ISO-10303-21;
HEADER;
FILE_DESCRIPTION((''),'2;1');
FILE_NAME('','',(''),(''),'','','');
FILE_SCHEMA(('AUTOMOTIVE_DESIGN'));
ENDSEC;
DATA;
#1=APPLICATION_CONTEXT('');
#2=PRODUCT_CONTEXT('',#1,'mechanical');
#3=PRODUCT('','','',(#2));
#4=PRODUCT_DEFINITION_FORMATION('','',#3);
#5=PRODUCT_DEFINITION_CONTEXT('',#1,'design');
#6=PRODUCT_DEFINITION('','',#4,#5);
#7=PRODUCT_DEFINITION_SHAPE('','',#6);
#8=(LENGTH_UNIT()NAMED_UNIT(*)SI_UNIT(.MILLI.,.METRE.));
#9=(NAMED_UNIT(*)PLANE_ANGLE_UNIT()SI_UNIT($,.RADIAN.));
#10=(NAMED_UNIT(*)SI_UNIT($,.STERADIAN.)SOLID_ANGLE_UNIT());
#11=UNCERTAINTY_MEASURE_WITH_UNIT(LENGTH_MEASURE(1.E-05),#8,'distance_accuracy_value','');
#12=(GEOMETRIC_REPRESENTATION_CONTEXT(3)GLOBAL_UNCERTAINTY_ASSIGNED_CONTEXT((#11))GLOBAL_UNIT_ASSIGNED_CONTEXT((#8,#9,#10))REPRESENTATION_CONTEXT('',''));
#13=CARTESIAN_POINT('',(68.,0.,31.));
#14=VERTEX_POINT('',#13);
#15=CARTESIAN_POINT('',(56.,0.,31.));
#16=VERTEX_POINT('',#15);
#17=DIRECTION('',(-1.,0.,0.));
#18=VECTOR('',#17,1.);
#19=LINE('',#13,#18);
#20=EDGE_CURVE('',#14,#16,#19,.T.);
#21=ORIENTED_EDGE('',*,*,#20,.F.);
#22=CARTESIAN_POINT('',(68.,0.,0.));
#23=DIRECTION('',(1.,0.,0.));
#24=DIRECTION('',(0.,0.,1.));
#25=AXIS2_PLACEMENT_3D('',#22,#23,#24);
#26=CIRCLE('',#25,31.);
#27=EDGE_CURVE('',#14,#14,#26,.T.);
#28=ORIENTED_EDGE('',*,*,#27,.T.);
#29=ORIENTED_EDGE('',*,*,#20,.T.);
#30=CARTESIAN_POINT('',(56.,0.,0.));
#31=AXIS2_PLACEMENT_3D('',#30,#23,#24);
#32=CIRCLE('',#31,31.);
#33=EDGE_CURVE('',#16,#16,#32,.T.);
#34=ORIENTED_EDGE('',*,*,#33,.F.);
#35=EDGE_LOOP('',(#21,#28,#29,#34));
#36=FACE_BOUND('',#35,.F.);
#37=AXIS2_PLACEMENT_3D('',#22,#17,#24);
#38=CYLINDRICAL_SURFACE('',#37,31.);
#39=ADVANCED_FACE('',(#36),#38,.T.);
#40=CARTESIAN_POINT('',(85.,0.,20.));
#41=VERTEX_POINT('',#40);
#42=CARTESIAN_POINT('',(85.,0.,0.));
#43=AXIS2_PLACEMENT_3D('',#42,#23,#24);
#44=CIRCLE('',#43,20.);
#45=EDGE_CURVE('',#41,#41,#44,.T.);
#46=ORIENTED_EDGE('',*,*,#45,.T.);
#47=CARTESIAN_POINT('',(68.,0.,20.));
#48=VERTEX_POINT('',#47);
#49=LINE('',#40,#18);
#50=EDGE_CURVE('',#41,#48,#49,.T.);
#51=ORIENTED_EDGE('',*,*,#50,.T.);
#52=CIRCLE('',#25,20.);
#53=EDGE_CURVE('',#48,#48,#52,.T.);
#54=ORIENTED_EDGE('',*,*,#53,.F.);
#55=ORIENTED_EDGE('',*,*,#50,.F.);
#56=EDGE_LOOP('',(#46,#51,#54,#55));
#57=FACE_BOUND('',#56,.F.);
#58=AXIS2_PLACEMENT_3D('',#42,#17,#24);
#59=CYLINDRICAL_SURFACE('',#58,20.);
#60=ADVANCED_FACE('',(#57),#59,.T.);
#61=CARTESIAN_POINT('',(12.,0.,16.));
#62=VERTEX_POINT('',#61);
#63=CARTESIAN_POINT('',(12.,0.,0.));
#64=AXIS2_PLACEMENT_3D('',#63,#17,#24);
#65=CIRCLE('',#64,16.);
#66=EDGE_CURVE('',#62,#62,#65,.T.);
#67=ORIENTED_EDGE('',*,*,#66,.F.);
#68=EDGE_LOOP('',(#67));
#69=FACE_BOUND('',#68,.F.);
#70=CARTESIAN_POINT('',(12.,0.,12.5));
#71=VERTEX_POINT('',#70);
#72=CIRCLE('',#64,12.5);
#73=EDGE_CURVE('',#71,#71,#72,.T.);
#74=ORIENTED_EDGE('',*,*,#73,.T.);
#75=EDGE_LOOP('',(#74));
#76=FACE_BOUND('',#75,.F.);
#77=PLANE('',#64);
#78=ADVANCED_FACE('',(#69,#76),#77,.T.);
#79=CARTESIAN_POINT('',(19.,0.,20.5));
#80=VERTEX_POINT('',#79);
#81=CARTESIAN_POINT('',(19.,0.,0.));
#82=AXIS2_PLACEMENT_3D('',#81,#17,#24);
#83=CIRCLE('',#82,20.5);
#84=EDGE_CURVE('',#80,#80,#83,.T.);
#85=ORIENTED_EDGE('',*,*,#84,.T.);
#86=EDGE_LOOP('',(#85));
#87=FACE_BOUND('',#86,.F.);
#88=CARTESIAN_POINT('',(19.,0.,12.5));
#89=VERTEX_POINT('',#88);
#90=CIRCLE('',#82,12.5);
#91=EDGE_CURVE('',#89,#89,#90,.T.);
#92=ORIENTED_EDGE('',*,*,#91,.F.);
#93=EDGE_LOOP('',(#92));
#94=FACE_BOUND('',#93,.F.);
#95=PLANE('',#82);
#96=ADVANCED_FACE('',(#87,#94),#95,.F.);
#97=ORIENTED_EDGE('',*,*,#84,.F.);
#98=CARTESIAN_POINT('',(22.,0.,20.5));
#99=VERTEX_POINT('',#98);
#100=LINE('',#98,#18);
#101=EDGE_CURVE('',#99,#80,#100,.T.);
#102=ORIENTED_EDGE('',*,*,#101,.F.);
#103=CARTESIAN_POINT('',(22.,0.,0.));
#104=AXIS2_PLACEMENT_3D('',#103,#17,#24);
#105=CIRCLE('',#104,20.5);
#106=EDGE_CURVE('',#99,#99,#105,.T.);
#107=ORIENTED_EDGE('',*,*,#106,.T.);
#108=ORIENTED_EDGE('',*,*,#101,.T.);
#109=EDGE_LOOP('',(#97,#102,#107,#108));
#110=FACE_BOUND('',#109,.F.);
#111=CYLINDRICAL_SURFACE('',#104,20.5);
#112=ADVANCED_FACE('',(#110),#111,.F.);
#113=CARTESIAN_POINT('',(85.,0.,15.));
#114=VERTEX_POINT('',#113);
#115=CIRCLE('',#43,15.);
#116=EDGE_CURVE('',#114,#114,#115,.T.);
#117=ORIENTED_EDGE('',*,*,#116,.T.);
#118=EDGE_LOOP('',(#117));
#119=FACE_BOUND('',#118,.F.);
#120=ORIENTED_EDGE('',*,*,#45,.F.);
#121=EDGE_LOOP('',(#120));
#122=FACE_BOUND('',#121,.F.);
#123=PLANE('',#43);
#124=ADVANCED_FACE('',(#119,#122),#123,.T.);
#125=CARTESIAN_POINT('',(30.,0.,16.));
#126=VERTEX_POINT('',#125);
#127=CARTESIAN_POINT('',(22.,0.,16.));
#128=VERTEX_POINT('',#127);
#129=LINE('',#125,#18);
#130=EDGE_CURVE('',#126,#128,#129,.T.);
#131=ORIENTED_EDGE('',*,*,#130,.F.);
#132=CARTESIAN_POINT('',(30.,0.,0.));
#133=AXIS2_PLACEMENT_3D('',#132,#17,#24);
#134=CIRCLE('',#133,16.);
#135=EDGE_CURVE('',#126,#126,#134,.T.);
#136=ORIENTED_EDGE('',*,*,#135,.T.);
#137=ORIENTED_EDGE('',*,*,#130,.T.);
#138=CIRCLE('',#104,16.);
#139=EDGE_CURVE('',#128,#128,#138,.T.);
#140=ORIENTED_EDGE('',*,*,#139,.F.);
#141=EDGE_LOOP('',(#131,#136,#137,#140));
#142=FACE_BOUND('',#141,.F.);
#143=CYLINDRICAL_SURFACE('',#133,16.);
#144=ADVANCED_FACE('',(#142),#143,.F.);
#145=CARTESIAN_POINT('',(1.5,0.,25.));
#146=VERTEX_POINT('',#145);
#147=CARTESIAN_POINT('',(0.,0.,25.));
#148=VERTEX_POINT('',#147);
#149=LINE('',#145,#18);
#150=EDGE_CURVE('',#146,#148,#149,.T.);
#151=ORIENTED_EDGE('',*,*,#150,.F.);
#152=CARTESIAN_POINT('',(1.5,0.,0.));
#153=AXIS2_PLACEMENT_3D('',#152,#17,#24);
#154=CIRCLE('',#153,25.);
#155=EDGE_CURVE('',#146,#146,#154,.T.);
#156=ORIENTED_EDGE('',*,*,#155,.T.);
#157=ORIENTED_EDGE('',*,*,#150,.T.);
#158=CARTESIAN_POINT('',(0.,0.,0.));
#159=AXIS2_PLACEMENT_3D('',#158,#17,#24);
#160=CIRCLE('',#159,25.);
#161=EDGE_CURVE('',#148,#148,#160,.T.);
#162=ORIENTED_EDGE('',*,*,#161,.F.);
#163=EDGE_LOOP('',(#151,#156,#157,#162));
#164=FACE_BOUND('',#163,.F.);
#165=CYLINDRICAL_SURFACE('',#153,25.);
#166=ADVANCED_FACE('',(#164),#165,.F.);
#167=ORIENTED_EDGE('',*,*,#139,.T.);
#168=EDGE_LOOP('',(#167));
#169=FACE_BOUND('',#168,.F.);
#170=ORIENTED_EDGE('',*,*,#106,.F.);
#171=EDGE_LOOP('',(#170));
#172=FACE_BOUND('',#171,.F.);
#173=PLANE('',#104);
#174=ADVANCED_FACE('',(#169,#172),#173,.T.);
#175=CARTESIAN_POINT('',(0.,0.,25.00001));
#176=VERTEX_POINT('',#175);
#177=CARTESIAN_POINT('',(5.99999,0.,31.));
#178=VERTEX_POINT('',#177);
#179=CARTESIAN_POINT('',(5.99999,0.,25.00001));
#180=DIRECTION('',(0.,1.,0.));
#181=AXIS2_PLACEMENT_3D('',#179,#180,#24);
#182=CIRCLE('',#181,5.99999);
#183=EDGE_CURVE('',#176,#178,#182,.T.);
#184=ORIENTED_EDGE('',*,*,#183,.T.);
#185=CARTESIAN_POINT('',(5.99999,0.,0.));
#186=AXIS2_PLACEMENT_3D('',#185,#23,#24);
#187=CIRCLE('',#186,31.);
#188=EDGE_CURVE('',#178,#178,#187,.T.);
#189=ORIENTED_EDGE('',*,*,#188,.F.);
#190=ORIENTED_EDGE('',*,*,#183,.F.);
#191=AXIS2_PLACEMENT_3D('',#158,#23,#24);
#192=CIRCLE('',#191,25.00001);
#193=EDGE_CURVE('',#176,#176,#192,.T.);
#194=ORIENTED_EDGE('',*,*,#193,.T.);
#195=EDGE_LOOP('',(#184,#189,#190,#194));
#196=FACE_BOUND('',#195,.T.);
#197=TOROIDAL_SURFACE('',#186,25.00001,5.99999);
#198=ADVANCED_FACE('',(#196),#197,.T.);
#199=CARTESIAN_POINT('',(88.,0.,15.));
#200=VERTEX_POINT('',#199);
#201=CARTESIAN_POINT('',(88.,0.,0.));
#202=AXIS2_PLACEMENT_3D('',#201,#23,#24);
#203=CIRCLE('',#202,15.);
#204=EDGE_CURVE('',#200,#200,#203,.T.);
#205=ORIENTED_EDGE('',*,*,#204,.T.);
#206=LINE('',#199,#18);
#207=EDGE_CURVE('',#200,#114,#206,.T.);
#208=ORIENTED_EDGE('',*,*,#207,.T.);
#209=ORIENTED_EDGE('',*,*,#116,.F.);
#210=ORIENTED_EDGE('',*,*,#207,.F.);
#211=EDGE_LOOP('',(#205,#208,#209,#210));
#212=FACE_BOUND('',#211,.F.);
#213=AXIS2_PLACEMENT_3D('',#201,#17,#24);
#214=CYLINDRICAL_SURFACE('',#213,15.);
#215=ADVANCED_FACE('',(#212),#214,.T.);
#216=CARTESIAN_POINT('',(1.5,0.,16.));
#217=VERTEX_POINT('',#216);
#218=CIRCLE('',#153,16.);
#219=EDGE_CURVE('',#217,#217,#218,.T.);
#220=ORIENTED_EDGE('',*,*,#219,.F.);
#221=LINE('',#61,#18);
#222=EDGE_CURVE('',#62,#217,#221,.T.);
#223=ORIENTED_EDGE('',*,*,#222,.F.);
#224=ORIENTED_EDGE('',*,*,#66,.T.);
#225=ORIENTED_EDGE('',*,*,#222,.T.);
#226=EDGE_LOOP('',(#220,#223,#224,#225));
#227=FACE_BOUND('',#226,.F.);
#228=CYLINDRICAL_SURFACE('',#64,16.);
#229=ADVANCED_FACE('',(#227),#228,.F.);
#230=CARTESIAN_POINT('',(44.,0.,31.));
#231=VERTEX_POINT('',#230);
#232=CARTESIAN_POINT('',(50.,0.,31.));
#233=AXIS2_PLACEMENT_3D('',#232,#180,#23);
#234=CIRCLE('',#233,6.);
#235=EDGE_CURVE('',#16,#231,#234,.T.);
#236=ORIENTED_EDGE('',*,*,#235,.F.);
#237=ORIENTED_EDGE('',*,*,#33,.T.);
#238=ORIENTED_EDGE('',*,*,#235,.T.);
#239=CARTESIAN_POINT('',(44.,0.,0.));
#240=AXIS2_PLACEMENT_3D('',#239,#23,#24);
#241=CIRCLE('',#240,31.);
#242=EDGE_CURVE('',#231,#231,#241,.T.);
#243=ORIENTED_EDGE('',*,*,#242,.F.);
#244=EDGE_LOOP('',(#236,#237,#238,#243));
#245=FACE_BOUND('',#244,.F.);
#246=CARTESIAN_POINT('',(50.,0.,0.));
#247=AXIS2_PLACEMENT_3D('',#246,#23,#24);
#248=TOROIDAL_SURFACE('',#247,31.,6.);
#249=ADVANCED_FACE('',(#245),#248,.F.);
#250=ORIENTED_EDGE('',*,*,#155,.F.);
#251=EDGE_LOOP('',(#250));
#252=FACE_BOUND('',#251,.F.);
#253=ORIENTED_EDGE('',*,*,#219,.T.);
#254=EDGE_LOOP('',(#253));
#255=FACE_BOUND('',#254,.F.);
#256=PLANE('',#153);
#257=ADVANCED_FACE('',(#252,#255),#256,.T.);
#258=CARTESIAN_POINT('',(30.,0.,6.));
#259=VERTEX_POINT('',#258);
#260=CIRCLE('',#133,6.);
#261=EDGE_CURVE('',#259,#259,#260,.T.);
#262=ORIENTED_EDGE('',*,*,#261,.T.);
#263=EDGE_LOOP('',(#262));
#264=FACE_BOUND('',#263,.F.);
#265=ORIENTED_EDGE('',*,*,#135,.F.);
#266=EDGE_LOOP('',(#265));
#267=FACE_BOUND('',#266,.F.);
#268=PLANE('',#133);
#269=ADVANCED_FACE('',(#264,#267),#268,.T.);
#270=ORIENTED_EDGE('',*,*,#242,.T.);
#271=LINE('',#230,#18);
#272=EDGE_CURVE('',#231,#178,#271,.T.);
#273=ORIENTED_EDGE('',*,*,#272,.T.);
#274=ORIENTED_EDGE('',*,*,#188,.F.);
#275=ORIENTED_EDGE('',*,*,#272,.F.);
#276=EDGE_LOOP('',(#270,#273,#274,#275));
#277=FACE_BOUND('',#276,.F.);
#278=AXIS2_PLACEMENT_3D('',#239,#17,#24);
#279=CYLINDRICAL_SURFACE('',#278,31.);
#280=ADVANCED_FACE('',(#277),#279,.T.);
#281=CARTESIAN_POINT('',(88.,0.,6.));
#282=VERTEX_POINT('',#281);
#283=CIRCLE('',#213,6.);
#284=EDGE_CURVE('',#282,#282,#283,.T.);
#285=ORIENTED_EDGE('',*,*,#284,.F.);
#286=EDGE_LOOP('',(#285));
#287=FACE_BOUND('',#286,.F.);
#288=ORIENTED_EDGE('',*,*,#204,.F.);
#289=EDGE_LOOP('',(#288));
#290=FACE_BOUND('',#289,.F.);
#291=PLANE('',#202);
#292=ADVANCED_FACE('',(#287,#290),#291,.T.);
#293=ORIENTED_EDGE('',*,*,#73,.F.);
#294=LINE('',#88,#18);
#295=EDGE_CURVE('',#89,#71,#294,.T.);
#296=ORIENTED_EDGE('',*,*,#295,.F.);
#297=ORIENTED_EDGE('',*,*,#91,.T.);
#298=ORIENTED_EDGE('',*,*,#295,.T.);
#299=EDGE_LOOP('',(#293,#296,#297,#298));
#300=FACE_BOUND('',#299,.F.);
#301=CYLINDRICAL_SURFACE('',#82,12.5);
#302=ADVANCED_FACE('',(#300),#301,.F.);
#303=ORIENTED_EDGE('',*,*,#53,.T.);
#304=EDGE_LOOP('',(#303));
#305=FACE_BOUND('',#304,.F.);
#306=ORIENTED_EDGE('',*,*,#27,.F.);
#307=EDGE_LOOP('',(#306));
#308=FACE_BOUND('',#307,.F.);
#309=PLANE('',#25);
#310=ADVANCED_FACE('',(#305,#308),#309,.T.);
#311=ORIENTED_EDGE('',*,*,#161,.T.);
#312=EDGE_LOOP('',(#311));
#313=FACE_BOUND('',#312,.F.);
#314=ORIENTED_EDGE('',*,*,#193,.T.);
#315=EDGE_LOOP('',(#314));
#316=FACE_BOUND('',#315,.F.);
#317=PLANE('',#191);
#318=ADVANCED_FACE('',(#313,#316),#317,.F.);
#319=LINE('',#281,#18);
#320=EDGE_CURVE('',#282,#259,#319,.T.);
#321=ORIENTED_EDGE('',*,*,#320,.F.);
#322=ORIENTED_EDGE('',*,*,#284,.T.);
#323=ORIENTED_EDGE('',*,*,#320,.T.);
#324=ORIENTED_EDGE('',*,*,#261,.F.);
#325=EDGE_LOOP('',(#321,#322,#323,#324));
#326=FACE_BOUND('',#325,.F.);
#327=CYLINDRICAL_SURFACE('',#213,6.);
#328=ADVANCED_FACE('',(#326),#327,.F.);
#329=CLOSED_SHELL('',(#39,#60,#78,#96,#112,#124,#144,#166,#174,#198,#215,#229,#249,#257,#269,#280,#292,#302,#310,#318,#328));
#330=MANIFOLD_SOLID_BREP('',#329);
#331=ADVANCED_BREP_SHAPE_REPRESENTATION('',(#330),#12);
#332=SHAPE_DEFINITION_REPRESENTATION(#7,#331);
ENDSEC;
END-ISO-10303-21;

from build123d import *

# Parameters (mm, degrees)
F4_R = 5.99999


# Not quite as in the source:
# - a fillet or chamfer is up to 0.001 mm smaller than in the source, because OpenCascade refuses the exact size


with BuildPart() as f1:
    # F0 (on Front) → F1 (revolve)
    with BuildSketch(Plane.XZ):
        with BuildLine():
            Line((0, 31), (0, 0))
            Line((0, 0), (88, 0))
            Line((88, 0), (88, 15))
            Line((88, 15), (85, 15))
            Line((85, 15), (85, 20))
            Line((85, 20), (68, 20))
            Line((68, 20), (68, 31))
            Line((68, 31), (56, 31))
            ThreePointArc((56, 31), (50, 25), (44, 31))
            Line((44, 31), (0, 31))
        make_face()
    revolve(axis=Axis((45.4589584282, 0, 0), (1, 0, 0)))

    # F2 (on Front) → F3 (revolve, cut)
    with BuildSketch(Plane.XZ):
        Polygon((0, 25), (0, 0), (88, 0), (88, 6), (30, 6), (30, 16), (22, 16), (22, 20.5), (19, 20.5), (19, 12.5), (12, 12.5), (12, 16), (1.5, 16), (1.5, 25), align=None)
    revolve(axis=Axis((-7.9182099137, 0, 0), (-1, 0, 0)), mode=Mode.SUBTRACT)

    # F4 (radius 6 in the source; OpenCascade refuses exactly that, so slightly less here)
    f4_edges = [f1.edges().sort_by_distance(p)[0] for p in [
        (0, 0, -31),
    ]]
    fillet(f4_edges, radius=F4_R)


solid = f1.part
